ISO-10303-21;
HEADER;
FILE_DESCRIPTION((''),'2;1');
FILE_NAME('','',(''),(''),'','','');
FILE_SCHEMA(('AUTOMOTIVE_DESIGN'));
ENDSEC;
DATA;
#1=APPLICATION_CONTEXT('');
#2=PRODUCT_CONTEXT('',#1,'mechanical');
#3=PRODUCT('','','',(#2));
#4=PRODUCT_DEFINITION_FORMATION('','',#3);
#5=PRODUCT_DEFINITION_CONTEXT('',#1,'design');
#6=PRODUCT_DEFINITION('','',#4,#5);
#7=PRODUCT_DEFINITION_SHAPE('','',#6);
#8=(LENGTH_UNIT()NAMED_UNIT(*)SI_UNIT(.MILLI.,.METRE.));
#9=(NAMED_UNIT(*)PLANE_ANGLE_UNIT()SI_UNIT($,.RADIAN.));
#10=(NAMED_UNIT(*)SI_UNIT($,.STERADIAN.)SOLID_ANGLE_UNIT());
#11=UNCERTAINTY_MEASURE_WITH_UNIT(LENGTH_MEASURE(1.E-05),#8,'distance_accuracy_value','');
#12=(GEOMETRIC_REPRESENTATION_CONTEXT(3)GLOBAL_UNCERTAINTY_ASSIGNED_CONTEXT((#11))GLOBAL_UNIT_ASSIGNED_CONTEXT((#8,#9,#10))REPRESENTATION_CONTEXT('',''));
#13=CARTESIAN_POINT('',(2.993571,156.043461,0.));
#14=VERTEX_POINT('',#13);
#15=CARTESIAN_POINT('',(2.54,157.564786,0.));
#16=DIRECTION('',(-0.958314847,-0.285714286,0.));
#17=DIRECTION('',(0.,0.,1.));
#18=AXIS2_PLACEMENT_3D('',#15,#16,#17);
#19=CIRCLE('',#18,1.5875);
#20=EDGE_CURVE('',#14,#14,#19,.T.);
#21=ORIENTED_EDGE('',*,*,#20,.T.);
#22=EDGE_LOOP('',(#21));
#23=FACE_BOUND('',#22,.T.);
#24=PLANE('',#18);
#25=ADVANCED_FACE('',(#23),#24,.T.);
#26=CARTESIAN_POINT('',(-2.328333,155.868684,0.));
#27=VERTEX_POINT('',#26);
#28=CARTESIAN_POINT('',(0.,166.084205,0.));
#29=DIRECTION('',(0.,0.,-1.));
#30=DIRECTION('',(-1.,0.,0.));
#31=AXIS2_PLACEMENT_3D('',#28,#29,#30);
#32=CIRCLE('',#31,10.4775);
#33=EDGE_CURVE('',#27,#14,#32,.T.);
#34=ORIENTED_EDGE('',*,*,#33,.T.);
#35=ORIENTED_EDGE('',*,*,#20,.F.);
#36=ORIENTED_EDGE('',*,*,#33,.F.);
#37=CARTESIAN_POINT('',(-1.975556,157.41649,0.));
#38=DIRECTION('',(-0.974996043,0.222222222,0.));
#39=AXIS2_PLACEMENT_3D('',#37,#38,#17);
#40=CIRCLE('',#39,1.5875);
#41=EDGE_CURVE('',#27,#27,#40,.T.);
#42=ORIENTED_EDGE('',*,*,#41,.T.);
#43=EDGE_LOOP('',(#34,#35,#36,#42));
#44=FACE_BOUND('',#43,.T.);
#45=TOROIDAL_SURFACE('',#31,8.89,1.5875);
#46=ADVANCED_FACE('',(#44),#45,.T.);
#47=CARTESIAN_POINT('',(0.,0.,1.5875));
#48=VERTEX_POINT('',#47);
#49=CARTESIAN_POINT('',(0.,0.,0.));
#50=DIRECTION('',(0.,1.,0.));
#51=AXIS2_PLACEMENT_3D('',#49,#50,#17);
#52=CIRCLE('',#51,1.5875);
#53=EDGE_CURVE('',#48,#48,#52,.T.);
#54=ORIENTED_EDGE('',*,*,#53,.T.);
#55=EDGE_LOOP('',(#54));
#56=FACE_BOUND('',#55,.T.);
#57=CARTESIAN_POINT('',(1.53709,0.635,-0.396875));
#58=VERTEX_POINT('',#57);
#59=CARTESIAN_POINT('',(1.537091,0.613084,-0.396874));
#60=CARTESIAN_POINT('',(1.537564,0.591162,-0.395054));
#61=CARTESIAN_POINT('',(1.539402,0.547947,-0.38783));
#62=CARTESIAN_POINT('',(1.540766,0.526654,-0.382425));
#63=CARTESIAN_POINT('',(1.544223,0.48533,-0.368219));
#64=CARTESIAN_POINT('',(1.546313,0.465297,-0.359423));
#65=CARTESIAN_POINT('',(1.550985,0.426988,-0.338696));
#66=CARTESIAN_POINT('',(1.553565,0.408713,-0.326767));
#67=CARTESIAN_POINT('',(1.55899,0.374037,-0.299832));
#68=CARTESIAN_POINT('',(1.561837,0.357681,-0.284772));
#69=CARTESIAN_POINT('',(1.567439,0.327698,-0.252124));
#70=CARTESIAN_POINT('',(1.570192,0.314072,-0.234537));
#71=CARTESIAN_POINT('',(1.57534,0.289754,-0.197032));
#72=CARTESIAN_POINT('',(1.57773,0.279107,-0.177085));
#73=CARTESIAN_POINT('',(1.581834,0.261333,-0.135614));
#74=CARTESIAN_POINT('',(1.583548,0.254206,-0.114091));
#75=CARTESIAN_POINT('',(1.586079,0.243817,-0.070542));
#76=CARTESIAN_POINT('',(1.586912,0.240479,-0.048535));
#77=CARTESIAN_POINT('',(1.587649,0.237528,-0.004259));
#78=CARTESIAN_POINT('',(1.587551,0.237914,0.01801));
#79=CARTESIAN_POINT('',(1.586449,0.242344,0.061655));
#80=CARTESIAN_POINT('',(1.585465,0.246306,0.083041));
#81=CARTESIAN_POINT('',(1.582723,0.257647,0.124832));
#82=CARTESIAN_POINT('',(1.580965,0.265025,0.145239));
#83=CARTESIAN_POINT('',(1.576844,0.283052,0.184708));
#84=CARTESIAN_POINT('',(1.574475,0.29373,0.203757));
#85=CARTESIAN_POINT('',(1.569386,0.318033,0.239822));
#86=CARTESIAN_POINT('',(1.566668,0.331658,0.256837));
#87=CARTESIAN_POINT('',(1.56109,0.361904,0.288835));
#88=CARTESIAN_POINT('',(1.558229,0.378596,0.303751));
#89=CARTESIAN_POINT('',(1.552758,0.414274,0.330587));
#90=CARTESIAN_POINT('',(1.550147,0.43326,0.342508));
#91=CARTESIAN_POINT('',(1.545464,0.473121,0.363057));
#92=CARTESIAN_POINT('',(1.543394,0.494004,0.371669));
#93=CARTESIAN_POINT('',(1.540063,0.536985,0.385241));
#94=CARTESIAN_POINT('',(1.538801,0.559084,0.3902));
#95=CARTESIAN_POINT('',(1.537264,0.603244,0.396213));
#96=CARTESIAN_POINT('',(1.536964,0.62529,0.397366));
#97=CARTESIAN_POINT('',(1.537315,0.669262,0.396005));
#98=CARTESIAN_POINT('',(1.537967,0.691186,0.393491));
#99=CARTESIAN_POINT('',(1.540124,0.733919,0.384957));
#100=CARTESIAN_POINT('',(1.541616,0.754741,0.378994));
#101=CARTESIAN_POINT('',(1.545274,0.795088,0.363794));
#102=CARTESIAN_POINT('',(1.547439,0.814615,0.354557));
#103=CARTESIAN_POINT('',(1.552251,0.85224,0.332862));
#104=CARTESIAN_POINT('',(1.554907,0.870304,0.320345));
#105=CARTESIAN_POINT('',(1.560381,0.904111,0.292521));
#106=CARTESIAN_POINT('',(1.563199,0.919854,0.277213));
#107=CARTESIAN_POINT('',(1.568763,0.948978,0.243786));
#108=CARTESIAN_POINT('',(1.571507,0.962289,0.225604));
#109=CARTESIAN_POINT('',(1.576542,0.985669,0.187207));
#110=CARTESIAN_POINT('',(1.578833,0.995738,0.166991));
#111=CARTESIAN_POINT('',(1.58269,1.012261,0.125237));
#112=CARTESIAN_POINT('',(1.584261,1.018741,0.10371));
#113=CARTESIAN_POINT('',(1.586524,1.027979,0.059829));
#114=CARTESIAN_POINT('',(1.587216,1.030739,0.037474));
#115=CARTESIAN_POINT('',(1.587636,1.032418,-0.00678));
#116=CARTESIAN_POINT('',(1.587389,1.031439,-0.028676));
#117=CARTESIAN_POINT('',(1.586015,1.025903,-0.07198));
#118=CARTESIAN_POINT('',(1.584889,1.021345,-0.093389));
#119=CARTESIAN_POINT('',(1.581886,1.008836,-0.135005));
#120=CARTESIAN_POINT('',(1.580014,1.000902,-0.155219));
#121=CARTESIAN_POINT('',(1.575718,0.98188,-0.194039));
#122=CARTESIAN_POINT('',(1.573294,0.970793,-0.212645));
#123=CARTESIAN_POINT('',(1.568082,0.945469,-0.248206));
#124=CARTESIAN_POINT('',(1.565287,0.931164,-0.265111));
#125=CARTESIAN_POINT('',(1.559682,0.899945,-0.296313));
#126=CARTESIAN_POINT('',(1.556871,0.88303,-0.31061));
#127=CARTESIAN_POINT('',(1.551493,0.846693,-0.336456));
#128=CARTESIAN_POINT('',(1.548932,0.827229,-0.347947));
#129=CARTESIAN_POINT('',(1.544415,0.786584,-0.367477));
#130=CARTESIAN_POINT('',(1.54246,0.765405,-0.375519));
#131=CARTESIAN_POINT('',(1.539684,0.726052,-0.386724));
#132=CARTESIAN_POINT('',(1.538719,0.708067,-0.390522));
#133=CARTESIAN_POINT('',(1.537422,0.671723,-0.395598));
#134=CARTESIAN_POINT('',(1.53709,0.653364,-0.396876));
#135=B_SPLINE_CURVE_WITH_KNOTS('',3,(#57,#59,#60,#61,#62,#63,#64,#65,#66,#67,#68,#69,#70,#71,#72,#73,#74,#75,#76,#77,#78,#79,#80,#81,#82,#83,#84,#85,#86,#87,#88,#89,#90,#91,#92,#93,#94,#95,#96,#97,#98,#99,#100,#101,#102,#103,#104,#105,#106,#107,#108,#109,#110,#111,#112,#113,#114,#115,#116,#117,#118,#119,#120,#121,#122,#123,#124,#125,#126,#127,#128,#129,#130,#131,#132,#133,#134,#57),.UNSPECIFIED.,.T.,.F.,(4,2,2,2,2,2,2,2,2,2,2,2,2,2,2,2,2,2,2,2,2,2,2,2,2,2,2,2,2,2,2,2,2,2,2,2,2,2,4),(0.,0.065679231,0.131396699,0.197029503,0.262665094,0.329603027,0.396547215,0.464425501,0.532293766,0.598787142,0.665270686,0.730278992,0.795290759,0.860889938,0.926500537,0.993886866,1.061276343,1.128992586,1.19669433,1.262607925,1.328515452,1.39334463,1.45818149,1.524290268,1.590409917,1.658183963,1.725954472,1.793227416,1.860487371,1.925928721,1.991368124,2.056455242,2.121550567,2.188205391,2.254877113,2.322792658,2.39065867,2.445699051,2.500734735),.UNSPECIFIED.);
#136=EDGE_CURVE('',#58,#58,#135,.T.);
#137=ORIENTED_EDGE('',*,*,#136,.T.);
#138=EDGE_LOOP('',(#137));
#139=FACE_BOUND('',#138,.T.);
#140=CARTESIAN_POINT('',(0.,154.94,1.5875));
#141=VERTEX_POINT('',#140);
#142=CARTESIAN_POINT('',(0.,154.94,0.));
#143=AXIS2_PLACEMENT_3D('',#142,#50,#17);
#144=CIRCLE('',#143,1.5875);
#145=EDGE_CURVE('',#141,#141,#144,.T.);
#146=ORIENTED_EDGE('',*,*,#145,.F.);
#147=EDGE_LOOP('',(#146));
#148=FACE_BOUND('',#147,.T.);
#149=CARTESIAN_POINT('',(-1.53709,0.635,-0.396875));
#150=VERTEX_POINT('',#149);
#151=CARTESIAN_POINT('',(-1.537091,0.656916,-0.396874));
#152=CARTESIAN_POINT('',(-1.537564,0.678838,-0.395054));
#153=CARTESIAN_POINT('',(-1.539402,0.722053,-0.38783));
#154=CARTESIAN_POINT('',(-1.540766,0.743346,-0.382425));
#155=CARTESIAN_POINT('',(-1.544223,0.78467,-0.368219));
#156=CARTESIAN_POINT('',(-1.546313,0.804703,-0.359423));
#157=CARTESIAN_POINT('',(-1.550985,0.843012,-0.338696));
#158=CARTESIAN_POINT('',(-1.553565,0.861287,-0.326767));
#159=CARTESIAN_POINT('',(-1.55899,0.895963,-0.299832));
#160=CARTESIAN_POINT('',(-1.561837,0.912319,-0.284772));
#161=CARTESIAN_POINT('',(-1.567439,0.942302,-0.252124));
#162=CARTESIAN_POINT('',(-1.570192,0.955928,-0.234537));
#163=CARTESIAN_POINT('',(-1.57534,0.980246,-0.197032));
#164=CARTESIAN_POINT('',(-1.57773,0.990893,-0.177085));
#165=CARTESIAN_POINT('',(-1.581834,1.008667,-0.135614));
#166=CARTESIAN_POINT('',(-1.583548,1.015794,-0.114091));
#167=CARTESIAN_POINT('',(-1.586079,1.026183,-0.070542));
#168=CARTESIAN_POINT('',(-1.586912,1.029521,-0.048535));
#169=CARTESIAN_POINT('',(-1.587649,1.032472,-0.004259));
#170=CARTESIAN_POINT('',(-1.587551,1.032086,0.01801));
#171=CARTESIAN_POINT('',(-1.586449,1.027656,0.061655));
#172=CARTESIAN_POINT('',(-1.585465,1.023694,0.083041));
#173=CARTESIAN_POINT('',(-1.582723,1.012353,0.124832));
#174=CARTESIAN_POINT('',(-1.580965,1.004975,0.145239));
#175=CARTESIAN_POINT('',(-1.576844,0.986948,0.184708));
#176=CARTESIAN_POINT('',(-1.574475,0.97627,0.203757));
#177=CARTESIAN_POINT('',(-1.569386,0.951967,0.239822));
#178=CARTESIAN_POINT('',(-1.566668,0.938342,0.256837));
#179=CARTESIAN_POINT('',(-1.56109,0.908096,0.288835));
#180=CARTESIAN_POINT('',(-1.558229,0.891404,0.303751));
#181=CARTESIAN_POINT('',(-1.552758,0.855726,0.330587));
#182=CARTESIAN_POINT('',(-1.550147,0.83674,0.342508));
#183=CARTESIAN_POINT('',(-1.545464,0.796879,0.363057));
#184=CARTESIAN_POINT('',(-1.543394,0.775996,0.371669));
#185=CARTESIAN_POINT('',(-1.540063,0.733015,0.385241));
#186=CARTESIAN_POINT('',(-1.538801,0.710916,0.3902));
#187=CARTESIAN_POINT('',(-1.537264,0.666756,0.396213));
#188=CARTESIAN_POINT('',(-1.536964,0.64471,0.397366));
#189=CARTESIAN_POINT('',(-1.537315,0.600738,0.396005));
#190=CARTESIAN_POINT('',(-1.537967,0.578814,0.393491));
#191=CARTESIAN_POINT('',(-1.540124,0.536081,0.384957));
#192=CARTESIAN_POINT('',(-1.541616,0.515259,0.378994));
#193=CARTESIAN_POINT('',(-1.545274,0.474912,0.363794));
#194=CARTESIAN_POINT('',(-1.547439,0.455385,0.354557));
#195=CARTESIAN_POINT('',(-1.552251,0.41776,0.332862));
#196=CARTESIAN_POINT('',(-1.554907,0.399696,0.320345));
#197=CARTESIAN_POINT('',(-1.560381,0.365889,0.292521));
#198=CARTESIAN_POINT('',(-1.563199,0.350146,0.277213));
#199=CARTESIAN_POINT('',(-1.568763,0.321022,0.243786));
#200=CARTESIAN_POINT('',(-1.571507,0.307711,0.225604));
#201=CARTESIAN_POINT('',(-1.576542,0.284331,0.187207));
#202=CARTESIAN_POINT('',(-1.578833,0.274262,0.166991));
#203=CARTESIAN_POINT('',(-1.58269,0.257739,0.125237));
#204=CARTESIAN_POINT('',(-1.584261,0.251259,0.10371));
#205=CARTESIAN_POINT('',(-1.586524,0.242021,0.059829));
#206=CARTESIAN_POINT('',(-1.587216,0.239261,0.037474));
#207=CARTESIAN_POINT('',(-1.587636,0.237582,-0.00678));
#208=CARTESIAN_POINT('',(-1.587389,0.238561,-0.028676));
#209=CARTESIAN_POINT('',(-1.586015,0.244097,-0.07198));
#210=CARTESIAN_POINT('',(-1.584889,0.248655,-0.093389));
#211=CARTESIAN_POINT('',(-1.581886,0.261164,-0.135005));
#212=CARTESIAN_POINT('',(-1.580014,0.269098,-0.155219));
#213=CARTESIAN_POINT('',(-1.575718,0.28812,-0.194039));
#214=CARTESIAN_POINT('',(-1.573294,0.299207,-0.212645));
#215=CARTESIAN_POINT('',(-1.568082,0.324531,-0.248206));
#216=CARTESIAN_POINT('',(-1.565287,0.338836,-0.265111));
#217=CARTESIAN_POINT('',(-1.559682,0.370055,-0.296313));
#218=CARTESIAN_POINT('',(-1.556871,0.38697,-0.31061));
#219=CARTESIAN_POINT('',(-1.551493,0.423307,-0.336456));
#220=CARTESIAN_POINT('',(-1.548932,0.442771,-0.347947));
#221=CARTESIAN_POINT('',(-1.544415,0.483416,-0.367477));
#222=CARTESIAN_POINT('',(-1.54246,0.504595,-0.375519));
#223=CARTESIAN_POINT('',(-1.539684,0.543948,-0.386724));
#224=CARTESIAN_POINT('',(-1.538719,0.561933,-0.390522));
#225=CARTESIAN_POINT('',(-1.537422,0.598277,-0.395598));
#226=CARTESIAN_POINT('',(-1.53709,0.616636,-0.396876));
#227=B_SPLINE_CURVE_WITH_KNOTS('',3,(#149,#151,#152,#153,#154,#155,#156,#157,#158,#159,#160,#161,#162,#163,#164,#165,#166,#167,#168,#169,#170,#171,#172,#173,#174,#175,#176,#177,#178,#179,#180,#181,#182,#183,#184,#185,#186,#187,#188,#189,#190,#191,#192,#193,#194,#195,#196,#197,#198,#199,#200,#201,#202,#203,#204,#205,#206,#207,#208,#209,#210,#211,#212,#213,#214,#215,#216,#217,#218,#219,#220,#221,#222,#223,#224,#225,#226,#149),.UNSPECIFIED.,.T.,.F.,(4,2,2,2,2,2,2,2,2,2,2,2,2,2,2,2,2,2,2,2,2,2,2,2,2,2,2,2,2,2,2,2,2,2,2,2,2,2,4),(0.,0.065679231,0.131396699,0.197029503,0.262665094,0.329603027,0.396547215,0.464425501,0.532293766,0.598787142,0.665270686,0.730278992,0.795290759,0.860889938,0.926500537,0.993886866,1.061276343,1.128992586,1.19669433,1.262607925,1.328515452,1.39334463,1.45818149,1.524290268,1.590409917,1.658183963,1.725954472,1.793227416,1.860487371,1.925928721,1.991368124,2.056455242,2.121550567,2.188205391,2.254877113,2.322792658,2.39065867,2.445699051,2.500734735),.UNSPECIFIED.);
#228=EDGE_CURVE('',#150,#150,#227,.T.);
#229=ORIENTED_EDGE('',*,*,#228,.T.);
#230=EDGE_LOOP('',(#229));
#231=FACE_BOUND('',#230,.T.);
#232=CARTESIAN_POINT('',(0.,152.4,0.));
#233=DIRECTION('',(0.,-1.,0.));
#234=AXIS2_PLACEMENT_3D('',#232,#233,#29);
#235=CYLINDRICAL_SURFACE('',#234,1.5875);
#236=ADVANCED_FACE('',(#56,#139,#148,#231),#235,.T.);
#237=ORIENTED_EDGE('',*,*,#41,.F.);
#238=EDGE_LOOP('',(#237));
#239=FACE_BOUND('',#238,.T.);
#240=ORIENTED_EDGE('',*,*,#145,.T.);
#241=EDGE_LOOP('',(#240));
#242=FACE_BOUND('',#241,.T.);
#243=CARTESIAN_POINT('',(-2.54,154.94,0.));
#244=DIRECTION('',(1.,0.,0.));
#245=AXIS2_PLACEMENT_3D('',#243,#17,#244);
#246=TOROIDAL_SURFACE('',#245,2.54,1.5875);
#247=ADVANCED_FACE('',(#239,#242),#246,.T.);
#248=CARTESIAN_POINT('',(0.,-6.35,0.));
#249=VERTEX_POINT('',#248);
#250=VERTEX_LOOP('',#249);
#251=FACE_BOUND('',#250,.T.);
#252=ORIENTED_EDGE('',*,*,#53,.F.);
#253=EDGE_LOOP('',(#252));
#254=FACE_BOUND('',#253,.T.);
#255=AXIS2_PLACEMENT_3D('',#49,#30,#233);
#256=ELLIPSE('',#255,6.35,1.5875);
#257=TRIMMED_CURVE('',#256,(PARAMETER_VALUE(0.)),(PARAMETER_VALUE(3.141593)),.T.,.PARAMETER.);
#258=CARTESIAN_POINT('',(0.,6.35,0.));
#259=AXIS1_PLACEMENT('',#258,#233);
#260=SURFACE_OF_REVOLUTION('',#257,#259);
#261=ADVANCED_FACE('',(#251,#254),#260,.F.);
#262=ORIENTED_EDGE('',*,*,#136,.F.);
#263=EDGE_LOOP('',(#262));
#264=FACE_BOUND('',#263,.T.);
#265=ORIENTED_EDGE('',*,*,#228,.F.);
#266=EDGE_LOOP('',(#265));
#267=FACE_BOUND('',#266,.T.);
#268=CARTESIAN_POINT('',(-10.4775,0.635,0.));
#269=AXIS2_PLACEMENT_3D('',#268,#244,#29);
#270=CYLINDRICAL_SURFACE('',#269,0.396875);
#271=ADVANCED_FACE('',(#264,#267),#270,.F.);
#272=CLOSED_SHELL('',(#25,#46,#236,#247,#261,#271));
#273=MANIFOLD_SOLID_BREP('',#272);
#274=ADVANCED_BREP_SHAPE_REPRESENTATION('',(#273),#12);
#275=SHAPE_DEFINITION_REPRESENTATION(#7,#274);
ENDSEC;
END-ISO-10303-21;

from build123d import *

# Parameters (mm, degrees)
SKETCH1_R               = 1.5875
BOSS_EXTRUDE1_DEPTH     = 152.4
SKETCH3_R               = 1.5875
DOME1_FACE_RADIUS       = 1.5875
DOME1_HEIGHT            = 6.35
CUT_EXTRUDE1_DEPTH      = 177.879432926
CUT_EXTRUDE1_DEPTH_BACK = 177.879432926
SKETCH5_R               = 0.396875


with BuildPart() as part:
    # Sketch1 → Boss-Extrude1 (new body)
    with BuildSketch(Plane(origin=(0, 0, 0), x_dir=(1, 0, 0), z_dir=(0, 1, 0))):
        Circle(SKETCH1_R)
    extrude(amount=BOSS_EXTRUDE1_DEPTH)

    # Sweep1: sweep along a path in Sketch2
    with BuildLine(Plane.XY) as sweep1_path:
        Line((0, 152.4), (0, 154.94))
        ThreePointArc((0, 154.94), (-0.554390662, 156.523968294), (-1.975555556, 157.416489949))
        ThreePointArc((-1.975555556, 157.416489949), (-0.291800096, 174.969414545), (2.54, 157.564785778))
    # Sketch3 → Sweep1 (sweep)
    with BuildSketch(Plane(origin=(0, 152.4, 0), x_dir=(1, 0, 0), z_dir=(0, 1, 0))):
        Circle(SKETCH3_R)
    sweep(path=sweep1_path.line)

    # Dome1: an elliptical dome of height H over a round flat face of radius A is half a spheroid: the quarter ellipse of half axes A and H revolved about the face's axis
    with BuildSketch(Plane((0, 0, 0), x_dir=(0, 0, 1), z_dir=(1, 0, 0)), mode=Mode.PRIVATE) as dome1_quarter:
        Ellipse(DOME1_FACE_RADIUS, DOME1_HEIGHT)
        Rectangle(DOME1_FACE_RADIUS, DOME1_HEIGHT, align=(Align.MIN, Align.MIN), mode=Mode.INTERSECT)
    revolve(dome1_quarter.sketch, axis=Axis((0, 0, 0), (0, -1, 0)))

    # Sketch5 → Cut-Extrude1 (cut, two sides: drawn at the far end of the back side and taken through both)
    with BuildSketch(Plane(origin=(0, 0, 0), x_dir=(0, 0, -1), z_dir=(1, 0, 0)).offset(-CUT_EXTRUDE1_DEPTH_BACK)):
        with Locations((0, 0.635)):
            Circle(SKETCH5_R)
    extrude(amount=CUT_EXTRUDE1_DEPTH + CUT_EXTRUDE1_DEPTH_BACK, mode=Mode.SUBTRACT)


solid = part.part
